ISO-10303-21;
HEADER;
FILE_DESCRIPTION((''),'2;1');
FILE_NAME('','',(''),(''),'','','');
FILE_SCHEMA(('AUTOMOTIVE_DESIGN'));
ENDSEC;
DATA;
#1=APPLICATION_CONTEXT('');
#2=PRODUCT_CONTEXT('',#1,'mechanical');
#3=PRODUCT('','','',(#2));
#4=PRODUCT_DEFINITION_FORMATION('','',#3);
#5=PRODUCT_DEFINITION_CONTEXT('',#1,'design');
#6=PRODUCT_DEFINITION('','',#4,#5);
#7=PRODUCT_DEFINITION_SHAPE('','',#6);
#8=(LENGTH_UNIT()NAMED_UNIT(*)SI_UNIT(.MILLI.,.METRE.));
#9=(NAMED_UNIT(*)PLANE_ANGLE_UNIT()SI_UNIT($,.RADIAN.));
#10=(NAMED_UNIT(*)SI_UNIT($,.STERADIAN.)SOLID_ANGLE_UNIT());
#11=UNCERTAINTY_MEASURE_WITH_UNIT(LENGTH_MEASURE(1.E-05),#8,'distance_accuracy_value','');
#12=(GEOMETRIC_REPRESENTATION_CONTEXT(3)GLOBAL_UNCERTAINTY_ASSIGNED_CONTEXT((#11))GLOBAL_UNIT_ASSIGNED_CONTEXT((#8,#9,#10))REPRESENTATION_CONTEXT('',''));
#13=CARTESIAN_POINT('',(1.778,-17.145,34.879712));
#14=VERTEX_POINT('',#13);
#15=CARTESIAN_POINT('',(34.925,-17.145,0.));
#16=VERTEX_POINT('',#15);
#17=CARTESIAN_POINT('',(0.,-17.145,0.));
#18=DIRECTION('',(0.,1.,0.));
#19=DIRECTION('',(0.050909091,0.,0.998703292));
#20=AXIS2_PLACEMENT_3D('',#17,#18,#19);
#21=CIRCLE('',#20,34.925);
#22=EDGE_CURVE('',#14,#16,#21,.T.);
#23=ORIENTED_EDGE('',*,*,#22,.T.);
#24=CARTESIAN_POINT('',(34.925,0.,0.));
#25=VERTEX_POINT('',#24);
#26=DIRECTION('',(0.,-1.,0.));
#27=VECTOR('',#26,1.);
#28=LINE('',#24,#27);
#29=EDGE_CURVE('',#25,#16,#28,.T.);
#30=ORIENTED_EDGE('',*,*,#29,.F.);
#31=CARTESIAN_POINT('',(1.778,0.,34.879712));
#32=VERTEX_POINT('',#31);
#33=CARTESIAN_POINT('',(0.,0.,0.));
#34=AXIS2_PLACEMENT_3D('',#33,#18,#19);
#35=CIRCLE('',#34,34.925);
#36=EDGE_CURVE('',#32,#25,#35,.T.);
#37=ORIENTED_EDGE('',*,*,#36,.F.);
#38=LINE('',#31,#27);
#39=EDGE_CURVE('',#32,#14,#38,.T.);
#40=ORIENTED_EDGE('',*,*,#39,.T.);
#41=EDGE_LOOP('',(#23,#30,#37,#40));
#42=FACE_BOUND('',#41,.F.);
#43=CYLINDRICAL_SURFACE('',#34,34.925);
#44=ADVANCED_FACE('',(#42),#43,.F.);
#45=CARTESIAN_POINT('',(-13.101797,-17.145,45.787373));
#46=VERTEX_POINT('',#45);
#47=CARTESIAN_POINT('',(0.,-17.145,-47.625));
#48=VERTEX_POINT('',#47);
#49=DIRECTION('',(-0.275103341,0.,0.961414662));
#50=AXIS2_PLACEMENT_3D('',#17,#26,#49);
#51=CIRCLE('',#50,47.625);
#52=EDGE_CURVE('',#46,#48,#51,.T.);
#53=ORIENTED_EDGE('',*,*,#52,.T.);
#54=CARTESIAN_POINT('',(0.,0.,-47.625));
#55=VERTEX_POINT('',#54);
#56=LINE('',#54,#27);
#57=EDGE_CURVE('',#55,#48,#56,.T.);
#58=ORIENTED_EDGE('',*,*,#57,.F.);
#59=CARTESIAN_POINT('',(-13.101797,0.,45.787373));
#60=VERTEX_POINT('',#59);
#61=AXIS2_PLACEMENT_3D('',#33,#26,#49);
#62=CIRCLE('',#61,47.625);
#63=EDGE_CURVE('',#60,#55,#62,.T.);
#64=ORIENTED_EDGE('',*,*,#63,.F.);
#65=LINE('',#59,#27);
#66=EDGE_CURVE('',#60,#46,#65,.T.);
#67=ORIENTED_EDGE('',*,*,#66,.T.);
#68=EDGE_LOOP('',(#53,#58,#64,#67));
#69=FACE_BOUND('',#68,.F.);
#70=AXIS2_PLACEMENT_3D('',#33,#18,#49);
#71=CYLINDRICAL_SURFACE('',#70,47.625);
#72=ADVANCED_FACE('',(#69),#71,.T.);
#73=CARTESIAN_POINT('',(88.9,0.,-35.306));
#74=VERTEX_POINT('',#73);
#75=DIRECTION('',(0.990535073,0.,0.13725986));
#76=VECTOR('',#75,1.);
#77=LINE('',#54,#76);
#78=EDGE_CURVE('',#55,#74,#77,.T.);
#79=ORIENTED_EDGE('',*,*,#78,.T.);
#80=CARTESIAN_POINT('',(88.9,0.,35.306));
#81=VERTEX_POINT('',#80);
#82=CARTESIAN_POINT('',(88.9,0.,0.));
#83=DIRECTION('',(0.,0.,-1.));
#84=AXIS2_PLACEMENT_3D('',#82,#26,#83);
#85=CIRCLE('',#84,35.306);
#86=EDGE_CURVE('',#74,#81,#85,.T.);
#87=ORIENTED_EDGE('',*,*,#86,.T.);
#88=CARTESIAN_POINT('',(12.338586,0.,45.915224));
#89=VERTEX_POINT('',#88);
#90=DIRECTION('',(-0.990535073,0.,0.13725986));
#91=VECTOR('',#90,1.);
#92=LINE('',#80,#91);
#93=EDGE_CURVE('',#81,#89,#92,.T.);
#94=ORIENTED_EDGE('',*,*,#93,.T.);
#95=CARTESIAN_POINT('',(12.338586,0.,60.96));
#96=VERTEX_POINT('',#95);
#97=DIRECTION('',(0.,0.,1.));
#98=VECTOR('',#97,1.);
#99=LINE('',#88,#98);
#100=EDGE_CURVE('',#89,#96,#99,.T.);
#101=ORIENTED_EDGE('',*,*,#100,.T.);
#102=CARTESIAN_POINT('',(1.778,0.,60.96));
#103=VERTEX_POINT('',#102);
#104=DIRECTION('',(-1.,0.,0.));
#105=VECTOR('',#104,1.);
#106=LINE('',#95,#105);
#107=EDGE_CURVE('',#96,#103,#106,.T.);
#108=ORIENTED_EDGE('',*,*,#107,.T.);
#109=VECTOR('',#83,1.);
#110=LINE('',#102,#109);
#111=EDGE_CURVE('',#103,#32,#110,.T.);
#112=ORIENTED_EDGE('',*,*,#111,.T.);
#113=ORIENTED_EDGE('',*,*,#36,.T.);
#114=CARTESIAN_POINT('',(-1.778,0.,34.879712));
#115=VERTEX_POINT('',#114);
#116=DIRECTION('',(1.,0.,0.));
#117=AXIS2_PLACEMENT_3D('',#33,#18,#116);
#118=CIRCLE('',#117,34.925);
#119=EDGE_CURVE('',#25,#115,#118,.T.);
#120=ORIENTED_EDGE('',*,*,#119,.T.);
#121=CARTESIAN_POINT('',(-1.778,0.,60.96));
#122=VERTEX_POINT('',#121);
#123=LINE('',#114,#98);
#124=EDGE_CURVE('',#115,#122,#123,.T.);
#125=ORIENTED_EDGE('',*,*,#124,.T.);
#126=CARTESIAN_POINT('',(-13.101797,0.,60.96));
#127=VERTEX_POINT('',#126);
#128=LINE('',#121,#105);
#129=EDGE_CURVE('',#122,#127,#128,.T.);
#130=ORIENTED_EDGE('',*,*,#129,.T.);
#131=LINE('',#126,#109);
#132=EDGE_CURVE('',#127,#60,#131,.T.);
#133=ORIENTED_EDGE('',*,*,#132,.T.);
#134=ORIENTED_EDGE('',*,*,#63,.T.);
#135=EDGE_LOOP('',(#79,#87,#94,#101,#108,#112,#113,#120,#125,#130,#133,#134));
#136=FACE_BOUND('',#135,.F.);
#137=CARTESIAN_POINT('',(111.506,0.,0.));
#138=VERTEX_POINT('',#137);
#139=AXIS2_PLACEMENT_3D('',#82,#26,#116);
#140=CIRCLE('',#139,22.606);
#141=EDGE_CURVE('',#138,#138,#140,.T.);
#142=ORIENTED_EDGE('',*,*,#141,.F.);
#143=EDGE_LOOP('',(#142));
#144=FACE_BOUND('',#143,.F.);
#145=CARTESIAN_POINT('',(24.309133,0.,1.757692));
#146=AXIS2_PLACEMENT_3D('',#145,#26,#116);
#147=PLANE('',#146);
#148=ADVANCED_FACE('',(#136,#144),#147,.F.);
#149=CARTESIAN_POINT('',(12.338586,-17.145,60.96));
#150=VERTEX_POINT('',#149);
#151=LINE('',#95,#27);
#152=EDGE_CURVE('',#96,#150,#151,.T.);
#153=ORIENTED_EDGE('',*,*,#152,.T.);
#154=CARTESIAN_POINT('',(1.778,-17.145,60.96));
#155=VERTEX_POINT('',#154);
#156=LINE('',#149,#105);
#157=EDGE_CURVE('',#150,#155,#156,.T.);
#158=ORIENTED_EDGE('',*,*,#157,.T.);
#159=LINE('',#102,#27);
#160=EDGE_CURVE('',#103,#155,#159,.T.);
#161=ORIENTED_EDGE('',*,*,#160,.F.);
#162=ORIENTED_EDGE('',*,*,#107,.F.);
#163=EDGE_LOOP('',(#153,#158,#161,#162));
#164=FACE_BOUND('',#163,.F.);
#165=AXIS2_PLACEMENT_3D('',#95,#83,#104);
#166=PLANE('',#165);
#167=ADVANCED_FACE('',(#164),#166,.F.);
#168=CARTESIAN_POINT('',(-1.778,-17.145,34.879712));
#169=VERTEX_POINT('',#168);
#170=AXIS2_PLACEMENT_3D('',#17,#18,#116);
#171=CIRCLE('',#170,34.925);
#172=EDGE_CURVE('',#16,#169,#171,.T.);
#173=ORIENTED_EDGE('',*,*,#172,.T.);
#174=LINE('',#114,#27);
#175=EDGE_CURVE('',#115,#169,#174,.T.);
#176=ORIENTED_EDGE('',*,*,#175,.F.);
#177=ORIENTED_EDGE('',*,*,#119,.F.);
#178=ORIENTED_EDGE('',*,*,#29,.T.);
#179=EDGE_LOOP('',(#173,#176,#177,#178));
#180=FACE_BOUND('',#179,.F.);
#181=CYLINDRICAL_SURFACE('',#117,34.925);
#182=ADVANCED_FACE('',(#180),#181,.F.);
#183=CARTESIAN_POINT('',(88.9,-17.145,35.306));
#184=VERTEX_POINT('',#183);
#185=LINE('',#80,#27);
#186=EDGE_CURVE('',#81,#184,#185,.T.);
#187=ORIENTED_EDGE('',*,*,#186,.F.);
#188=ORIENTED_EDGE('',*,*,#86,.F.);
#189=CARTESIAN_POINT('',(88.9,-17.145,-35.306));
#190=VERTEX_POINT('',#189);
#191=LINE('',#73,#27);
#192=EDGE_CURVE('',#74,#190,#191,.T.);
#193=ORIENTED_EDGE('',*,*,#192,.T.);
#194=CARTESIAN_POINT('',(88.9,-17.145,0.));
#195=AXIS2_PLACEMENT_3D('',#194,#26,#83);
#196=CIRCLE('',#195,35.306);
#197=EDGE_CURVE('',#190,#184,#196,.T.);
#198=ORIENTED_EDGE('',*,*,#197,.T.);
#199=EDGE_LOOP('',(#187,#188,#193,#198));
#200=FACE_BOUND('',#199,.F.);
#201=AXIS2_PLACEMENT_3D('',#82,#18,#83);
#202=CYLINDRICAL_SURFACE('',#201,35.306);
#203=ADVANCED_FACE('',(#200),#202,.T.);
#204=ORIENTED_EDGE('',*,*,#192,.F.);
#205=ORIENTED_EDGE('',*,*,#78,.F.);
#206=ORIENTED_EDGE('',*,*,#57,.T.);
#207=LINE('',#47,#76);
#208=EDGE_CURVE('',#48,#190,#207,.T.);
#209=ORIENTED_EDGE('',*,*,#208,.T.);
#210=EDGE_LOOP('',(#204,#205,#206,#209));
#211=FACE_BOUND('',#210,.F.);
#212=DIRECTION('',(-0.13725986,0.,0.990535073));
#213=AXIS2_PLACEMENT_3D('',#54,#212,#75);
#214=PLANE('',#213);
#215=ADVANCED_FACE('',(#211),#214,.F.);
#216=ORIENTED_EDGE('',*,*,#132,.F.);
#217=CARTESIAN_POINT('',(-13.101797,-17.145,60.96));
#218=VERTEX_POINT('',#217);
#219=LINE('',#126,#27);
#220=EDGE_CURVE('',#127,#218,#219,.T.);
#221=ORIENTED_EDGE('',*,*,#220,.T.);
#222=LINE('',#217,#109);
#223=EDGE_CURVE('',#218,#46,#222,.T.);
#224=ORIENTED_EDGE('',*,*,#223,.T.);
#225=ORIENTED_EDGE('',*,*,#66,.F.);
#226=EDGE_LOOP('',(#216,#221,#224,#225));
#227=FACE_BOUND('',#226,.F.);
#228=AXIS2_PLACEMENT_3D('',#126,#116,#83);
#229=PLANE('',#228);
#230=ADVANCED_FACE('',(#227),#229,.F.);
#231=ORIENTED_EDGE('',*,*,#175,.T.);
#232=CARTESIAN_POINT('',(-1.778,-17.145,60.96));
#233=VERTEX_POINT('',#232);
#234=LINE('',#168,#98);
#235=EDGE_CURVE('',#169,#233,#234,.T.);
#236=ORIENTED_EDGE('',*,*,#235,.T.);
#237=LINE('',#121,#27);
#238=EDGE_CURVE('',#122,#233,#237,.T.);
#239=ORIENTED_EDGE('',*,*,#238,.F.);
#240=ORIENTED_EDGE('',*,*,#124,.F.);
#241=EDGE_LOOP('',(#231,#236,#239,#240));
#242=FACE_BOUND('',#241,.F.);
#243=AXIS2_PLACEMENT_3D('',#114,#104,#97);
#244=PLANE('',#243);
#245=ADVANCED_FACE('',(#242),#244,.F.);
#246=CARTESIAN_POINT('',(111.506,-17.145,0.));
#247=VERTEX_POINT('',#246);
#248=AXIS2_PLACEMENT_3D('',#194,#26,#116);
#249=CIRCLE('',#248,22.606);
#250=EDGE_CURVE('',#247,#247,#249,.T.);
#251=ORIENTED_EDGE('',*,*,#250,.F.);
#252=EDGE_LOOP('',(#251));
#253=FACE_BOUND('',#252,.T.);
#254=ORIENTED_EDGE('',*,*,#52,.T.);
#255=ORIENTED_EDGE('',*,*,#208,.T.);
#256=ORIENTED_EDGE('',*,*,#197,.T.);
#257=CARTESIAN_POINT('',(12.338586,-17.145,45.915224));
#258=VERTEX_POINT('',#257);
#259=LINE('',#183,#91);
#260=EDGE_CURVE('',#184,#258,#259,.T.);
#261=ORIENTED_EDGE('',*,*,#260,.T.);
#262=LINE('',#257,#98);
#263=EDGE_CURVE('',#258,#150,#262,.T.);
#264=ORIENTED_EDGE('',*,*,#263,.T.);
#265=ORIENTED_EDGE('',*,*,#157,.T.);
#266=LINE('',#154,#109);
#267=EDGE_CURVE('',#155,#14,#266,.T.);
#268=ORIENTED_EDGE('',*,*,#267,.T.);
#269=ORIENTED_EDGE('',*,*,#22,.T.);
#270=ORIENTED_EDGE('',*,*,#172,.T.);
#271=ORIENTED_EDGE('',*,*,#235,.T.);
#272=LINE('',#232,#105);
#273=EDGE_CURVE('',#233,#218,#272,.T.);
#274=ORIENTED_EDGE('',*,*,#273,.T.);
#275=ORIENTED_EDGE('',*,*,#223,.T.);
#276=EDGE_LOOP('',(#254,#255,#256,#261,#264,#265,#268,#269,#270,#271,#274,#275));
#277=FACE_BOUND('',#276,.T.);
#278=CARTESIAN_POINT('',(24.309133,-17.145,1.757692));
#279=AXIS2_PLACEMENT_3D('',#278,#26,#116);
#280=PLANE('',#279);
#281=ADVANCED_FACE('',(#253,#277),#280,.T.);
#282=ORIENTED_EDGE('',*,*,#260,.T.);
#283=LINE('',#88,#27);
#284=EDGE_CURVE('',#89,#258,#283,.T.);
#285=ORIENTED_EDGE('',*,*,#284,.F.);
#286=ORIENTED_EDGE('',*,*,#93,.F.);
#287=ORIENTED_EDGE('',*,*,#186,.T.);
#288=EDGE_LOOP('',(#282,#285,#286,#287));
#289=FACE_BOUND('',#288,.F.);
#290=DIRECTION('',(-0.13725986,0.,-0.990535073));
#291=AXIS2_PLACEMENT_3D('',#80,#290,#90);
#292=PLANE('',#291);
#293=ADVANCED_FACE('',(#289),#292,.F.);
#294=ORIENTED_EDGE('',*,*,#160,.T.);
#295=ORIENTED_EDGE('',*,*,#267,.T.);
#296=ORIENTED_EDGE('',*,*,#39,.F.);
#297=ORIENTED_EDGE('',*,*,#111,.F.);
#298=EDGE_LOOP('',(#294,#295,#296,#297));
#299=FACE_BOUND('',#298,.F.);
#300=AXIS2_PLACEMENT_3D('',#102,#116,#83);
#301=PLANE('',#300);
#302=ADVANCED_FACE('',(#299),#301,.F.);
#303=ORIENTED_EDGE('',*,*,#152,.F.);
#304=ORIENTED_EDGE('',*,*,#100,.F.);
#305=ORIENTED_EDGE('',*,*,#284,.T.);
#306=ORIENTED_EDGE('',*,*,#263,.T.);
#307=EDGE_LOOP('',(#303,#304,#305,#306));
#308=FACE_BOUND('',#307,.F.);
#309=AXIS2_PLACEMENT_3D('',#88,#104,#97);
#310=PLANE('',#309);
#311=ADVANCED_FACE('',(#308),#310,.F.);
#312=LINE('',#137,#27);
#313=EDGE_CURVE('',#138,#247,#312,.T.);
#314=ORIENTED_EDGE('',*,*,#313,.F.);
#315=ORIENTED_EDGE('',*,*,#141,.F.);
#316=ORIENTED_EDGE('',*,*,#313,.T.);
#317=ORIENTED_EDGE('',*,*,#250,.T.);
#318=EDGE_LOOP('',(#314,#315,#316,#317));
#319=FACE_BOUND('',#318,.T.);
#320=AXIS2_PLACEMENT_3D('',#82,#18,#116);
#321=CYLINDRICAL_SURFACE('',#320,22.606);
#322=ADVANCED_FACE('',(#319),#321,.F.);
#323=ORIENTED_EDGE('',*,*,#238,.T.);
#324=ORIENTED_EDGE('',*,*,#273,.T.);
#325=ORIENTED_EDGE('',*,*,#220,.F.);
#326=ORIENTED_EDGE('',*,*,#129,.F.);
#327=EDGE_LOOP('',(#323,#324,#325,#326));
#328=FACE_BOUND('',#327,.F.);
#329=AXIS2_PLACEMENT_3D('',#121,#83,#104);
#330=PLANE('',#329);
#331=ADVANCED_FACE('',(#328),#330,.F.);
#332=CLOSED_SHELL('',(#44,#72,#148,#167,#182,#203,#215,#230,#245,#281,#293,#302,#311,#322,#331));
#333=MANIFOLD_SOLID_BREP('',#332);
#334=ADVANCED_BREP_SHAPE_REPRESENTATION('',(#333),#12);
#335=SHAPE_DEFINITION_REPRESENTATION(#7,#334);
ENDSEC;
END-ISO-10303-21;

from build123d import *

# Parameters (mm, degrees)
F0_R     = 22.606
F1_DEPTH = 17.145


# Not quite as in the source:
# - a feature names something its author has since deleted; it is built from what else it names


with BuildPart() as f1:
    # F0 (on Front) → F1 (new body)
    with BuildSketch(Plane.XZ):
        with BuildLine():
            ThreePointArc((1.778, 34.8797124558), (25.3165190636, 24.0588754413), (34.925, 0))
            ThreePointArc((34.925, 0), (-24.0588754413, -25.3165190636), (-1.778, 34.8797124558))
            Line((-1.778, 34.8797124558), (-1.778, 47.591799094))
            ThreePointArc((-1.778, 47.591799094), (-7.4944029118, 47.0316335034), (-13.1017966196, 45.7873732631))
            ThreePointArc((-13.1017966196, 45.7873732631), (-47.1633558849, -6.6150197786), (0, -47.625))
            Line((0, -47.625), (88.9, -35.306))
            ThreePointArc((88.9, -35.306), (124.206, 0), (88.9, 35.306))
            Line((88.9, 35.306), (12.3385861516, 45.9152244904))
            Line((12.3385861516, 45.9152244904), (1.778, 47.37862))
            Line((1.778, 47.37862), (1.778, 34.8797124558))
        make_face()
        with Locations((88.9, 0)):
            Circle(F0_R, mode=Mode.SUBTRACT)
        with BuildLine():
            ThreePointArc((-13.1017966196, 45.7873732631), (-7.4944029118, 47.0316335034), (-1.778, 47.591799094))
            Line((-1.778, 47.591799094), (-1.778, 60.96))
            Line((-1.778, 60.96), (-13.1017966196, 60.96))
            Line((-13.1017966196, 60.96), (-13.1017966196, 45.7873732631))
        make_face()
        Polygon((1.778, 60.96), (1.778, 47.37862), (12.3385861516, 45.9152244904), (12.3385861516, 60.96), align=None)
    extrude(amount=F1_DEPTH)


solid = f1.part
